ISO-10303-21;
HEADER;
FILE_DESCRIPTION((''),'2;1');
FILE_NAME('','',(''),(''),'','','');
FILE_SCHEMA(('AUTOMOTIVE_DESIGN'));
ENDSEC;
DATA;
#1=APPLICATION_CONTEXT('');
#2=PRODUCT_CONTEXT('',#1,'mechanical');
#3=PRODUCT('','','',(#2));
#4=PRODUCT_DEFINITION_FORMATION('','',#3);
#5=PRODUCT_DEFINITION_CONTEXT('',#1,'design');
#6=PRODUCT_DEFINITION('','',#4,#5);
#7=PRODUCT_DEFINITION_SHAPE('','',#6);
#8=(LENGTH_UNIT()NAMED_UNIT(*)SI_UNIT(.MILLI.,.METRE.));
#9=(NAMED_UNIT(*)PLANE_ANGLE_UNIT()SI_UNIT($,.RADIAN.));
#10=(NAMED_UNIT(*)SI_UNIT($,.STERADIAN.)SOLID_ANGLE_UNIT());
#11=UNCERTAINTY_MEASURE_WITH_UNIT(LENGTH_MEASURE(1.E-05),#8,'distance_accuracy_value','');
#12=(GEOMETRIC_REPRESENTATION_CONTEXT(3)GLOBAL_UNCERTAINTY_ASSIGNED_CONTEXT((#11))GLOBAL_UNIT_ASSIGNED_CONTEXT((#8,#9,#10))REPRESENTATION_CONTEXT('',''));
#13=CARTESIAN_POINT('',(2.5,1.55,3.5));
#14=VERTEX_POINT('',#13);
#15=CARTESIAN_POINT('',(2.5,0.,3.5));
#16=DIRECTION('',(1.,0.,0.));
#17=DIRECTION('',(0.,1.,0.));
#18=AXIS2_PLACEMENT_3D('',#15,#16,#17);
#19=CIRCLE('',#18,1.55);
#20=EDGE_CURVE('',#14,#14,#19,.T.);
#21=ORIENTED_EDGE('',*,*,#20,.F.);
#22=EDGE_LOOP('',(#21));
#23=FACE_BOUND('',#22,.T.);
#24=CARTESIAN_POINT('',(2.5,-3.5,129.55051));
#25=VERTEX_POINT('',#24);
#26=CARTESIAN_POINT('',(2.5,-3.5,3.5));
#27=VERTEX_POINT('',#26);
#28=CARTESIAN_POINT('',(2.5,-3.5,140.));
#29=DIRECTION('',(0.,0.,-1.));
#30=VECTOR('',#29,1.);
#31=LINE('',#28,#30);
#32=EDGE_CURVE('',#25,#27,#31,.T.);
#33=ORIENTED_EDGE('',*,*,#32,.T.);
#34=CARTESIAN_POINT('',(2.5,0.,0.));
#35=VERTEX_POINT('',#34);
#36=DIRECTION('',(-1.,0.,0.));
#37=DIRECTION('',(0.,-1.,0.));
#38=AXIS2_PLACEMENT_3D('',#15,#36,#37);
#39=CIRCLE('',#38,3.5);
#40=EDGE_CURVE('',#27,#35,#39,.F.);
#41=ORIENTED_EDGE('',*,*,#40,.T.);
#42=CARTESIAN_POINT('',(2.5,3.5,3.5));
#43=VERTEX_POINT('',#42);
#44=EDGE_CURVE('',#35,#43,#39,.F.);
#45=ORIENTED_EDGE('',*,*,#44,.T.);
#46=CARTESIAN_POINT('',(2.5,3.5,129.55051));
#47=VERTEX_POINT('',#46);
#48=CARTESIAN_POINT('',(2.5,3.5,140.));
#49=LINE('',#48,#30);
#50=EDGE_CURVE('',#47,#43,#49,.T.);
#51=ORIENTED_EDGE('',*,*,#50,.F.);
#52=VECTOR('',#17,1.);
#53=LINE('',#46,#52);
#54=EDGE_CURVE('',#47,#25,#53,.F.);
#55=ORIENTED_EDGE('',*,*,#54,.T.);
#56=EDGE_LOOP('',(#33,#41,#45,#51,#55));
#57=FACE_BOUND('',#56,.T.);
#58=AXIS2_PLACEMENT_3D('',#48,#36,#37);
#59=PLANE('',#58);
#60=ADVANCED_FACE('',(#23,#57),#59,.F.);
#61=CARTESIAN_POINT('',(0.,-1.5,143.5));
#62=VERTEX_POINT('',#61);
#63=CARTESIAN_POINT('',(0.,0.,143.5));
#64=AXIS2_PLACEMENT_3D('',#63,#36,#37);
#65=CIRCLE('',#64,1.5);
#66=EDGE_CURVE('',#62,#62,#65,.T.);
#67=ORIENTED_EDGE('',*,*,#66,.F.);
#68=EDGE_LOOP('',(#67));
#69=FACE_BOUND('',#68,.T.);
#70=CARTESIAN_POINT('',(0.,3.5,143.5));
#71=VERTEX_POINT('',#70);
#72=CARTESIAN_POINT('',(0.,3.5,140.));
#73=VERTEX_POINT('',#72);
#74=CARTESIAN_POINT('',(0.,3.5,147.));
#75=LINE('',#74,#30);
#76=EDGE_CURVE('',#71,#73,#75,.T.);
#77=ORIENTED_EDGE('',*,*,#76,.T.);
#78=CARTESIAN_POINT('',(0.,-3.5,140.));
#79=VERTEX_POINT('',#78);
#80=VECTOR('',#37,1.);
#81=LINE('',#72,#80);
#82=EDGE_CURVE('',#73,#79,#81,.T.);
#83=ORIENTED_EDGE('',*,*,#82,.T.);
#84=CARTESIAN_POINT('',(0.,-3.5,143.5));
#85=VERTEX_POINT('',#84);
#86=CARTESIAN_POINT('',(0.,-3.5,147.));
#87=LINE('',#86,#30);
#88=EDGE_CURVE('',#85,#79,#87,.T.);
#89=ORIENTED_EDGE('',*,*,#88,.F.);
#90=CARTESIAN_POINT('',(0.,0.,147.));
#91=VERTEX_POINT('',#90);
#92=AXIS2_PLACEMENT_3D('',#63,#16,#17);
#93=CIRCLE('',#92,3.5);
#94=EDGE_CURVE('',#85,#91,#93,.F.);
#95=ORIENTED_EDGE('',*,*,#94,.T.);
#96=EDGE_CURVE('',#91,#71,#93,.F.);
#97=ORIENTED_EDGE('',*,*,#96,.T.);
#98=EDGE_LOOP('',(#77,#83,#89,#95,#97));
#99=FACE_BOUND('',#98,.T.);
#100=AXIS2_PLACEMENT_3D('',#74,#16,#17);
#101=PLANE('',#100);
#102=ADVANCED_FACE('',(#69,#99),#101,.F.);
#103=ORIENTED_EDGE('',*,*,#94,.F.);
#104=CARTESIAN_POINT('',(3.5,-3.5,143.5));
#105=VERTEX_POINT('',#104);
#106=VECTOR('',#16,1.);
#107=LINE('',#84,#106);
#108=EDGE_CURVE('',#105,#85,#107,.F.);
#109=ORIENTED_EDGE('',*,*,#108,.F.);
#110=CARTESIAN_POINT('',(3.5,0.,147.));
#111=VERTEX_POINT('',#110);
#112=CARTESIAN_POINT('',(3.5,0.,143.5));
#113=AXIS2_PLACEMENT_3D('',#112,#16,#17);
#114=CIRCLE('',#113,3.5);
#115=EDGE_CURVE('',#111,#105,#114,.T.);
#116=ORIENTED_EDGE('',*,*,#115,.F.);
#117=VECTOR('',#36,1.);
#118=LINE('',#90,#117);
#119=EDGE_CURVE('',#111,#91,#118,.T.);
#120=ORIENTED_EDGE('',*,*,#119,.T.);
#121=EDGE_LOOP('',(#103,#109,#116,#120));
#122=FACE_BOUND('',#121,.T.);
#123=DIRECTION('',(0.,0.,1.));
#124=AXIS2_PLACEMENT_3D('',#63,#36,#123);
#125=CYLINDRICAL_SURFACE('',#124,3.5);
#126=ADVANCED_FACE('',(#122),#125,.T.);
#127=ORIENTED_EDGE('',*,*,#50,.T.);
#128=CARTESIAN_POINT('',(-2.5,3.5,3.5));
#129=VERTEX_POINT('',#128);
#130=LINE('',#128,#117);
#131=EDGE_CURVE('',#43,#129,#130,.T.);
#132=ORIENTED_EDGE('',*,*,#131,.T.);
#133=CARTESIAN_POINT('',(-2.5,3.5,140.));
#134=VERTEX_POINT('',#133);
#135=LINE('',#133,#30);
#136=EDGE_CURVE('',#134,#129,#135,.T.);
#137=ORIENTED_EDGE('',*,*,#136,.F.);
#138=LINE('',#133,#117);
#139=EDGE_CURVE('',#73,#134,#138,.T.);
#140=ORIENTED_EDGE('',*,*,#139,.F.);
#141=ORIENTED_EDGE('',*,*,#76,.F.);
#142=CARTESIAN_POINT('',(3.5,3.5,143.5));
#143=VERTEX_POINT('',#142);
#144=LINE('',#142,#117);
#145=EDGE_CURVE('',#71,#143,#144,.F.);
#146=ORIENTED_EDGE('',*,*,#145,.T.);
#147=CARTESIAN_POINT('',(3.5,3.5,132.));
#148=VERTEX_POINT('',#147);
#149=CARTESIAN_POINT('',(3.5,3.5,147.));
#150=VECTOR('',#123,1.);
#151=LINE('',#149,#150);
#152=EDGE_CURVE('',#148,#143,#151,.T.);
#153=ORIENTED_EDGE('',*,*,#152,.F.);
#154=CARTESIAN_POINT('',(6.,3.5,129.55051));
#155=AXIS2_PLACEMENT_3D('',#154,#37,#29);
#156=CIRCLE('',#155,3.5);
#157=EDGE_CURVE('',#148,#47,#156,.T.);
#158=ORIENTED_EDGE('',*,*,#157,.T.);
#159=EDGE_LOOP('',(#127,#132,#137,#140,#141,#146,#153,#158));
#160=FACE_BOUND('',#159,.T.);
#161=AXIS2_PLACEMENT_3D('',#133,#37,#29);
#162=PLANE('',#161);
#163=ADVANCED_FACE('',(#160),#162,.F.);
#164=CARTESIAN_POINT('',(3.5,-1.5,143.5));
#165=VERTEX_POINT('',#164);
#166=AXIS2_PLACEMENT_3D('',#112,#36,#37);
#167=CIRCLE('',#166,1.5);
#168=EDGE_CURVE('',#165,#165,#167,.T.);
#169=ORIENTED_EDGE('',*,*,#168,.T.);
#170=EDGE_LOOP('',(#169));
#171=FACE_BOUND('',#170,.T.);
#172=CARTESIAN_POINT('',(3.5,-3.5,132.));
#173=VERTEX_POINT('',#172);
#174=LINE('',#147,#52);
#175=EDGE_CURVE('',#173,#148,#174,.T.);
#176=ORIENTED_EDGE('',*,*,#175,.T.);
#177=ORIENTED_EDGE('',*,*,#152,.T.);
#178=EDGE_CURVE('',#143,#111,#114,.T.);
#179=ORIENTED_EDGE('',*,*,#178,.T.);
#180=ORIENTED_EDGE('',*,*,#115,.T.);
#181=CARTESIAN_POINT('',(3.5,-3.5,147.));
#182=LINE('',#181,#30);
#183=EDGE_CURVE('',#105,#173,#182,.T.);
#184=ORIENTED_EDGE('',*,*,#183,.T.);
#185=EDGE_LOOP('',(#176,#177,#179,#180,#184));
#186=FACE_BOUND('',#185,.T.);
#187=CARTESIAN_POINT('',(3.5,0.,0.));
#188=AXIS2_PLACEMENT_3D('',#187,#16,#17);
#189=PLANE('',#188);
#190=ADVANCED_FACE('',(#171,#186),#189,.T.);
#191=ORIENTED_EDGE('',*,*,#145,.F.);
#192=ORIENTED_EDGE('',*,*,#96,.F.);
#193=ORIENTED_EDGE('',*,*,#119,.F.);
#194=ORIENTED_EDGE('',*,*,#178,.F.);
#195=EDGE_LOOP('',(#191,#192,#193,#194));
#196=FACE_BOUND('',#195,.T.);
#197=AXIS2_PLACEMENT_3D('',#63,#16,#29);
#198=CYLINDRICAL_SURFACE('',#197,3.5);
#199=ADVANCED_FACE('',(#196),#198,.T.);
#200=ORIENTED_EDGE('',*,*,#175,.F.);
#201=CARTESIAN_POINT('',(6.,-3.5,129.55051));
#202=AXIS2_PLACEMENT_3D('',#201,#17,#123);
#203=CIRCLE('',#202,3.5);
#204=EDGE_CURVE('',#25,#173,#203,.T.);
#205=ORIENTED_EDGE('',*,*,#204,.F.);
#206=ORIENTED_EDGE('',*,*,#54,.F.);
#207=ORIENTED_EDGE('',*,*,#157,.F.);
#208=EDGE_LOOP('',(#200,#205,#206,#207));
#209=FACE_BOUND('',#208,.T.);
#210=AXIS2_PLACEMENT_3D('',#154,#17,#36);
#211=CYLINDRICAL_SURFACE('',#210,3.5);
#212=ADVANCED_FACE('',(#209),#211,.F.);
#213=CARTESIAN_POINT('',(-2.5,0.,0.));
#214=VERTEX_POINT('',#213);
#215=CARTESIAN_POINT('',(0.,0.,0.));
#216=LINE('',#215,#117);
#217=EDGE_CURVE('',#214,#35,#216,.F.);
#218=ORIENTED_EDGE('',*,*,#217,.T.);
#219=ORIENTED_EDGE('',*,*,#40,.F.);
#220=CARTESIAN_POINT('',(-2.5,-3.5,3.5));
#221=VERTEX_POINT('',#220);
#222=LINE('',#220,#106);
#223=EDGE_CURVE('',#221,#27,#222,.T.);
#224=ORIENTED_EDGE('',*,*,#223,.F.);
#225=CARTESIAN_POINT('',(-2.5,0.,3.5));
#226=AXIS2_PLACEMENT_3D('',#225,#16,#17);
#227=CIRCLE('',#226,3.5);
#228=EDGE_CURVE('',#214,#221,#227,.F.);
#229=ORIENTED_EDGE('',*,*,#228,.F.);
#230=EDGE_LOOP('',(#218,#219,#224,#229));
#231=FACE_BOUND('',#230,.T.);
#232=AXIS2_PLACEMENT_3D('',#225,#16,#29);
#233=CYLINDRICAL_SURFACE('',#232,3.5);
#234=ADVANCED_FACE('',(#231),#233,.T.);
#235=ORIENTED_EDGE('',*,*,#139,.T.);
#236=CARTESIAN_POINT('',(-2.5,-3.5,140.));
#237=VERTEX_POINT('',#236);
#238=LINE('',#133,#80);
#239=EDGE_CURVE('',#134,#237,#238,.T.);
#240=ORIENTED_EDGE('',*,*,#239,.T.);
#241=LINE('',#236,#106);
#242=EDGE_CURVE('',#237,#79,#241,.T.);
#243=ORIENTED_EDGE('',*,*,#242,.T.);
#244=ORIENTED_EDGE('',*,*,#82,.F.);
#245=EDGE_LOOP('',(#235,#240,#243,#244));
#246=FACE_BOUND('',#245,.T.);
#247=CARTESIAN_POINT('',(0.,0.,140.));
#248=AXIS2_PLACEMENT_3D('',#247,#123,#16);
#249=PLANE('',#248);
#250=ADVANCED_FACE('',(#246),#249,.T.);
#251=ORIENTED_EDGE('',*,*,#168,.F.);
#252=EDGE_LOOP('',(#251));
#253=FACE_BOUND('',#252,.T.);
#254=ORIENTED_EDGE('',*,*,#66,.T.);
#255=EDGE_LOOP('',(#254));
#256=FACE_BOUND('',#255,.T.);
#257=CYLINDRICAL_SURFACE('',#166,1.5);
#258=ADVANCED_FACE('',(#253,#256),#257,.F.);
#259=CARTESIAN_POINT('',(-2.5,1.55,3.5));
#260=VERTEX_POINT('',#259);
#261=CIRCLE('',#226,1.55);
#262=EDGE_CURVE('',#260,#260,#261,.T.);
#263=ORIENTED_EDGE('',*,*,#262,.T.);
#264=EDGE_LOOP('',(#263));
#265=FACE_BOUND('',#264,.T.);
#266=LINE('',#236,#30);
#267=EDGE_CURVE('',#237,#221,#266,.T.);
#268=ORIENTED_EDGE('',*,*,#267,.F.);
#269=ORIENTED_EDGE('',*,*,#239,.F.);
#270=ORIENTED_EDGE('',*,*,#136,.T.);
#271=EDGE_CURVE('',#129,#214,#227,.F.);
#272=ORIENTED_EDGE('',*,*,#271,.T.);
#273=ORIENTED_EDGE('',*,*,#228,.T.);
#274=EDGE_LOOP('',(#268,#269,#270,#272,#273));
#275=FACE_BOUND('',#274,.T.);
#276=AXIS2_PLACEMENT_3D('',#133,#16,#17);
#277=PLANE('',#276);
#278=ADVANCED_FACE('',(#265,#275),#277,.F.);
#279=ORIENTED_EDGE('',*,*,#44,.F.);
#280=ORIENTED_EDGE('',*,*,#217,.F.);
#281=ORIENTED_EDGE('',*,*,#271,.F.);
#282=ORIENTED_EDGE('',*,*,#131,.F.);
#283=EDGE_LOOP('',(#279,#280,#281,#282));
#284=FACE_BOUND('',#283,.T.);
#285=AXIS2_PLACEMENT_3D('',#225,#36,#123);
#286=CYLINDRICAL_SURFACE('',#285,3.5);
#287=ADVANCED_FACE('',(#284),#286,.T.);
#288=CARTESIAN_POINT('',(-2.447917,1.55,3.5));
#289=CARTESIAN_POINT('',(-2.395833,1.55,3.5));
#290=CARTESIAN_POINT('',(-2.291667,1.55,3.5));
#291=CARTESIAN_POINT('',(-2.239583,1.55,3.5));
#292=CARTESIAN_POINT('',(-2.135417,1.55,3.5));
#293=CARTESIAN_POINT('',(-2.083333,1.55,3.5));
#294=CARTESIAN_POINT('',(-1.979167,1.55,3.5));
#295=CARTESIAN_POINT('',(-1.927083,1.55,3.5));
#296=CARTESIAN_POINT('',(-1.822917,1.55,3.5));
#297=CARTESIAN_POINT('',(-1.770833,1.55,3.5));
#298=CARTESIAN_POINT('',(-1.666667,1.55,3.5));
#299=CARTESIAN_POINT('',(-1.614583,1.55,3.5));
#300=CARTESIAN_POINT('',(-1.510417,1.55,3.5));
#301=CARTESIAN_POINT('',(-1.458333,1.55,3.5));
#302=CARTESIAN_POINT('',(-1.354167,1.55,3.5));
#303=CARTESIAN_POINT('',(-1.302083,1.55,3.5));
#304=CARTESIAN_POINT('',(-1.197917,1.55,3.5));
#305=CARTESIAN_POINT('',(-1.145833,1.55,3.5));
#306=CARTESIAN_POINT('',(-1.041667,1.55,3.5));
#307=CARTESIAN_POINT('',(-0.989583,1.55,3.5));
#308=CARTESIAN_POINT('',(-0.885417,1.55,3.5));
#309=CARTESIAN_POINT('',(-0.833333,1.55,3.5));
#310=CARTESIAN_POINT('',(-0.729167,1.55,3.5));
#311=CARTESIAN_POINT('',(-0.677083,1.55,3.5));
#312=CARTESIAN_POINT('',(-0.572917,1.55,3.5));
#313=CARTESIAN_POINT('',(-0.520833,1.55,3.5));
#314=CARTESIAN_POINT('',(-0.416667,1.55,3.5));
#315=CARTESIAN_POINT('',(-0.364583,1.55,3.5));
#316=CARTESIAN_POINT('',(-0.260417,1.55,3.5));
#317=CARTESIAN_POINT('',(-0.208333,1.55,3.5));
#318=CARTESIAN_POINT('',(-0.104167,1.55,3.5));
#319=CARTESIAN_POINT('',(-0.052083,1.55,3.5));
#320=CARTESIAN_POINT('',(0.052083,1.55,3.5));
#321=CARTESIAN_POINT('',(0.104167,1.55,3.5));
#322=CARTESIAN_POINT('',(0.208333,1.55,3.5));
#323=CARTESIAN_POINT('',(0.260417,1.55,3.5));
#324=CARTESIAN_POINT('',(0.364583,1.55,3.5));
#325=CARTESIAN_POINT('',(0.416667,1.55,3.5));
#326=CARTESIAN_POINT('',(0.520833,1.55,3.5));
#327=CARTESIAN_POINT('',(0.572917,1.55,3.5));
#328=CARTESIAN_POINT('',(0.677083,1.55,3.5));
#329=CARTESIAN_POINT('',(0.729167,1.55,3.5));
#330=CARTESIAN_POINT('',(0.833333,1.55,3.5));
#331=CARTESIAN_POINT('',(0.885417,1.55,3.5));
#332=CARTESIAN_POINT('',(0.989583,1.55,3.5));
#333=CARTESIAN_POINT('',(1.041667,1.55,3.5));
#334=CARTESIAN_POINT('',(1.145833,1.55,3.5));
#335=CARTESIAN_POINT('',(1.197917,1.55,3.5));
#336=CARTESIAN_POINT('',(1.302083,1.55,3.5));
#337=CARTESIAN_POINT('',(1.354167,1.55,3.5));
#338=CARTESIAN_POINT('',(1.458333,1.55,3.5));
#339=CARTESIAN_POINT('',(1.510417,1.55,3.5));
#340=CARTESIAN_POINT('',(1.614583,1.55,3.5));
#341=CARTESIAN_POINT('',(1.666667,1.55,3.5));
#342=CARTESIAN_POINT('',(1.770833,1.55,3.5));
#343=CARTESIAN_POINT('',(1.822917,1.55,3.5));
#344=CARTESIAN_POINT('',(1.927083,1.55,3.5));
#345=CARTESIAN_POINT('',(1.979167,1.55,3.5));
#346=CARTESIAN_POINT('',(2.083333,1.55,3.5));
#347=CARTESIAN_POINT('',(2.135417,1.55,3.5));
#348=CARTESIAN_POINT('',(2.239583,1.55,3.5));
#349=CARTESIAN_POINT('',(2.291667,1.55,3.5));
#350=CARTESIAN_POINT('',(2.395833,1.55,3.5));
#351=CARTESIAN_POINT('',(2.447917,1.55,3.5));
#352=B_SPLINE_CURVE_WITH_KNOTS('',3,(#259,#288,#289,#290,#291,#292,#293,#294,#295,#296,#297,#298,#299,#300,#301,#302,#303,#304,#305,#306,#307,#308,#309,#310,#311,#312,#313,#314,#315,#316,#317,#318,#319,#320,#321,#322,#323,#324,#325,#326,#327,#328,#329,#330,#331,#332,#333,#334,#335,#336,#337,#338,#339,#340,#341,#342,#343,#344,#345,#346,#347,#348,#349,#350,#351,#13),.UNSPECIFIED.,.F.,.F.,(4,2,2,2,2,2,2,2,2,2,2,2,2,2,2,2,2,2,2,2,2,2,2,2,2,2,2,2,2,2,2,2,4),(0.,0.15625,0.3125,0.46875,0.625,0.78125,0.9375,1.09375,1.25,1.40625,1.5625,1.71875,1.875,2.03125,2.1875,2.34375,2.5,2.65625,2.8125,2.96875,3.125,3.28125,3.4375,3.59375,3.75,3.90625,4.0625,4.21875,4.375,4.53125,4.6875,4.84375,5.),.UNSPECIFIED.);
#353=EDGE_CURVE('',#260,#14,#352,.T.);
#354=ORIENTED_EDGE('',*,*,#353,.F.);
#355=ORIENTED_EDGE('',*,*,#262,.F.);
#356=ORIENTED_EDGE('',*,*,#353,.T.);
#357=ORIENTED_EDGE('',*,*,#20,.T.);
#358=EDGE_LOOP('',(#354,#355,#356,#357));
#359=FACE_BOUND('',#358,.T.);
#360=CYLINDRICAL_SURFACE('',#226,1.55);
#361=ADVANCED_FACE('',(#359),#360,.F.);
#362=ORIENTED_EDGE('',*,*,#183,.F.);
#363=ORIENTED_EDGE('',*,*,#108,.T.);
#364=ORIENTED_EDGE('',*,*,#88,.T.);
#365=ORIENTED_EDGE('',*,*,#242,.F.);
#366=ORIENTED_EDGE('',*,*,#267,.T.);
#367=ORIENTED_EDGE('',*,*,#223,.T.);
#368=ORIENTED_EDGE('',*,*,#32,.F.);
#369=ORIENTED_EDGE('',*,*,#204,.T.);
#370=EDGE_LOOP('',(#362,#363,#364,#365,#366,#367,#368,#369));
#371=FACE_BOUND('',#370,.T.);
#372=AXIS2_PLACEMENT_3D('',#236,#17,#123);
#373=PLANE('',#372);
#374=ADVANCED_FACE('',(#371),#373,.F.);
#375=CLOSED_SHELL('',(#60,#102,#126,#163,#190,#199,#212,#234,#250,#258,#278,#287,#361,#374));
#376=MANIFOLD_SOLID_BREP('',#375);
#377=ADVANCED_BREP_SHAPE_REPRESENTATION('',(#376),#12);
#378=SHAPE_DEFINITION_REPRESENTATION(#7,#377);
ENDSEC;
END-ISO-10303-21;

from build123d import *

# Parameters (mm, degrees)
SKETCH_1_W          = 5
SKETCH_1_H          = 7
EXTRUDE_2_DEPTH     = 140
FILLET_1_R          = 3.5
SKETCH_3_R          = 1.55
CUT_EXTRUDE_1_DEPTH = 141.132972565
SKETCH_4_W          = 2.5
SKETCH_4_H          = 7
EXTRUDE_3_DEPTH     = 7
SKETCH_5_W          = 15
SKETCH_5_H          = 7
EXTRUDE_4_DEPTH     = 1
FILLET_2_R          = 3.5
SKETCH_6_R          = 1.5
CUT_EXTRUDE_2_DEPTH = 148.083309726
FILLET_3_R          = 3.5


# Some blends are built 0.0001 mm under size
with BuildPart() as part:
    # 草图1 → 凸台-拉伸2 (new body)
    with BuildSketch(Plane.XY):
        Rectangle(SKETCH_1_W, SKETCH_1_H)
    extrude(amount=EXTRUDE_2_DEPTH)

    # 圆角1
    fillet_1_edges = [part.edges().sort_by_distance(p)[0] for p in [
        (0, -3.5, 0),
        (0, 3.5, 0),
    ]]
    fillet(fillet_1_edges, radius=FILLET_1_R - 0.0001)  # a hair under: the kernel refuses the full size

    # 草图3 → 切除-拉伸1 (cut, through all)
    with BuildSketch(Plane(origin=(2.5, 0, 0), x_dir=(0, 0, -1), z_dir=(1, 0, 0))):
        with Locations(Location((-3.5, 0, 0), (0, 0, 90))):
            Circle(SKETCH_3_R)
    extrude(amount=-CUT_EXTRUDE_1_DEPTH, mode=Mode.SUBTRACT)

    # 草图4 → 凸台-拉伸3 (add)
    with BuildSketch(Plane.XY.offset(140)):
        with Locations((1.25, 0)):
            Rectangle(SKETCH_4_W, SKETCH_4_H)
    extrude(amount=EXTRUDE_3_DEPTH)

    # 草图5 → 凸台-拉伸4 (add)
    with BuildSketch(Plane(origin=(2.5, 0, 0), x_dir=(0, 0, -1), z_dir=(1, 0, 0))):
        with Locations((-139.5, 0)):
            Rectangle(SKETCH_5_W, SKETCH_5_H)
    extrude(amount=EXTRUDE_4_DEPTH)

    # 圆角2
    fillet_2_edges = [part.edges().sort_by_distance(p)[0] for p in [
        (1.75, -3.5, 147),
        (1.75, 3.5, 147),
    ]]
    fillet(fillet_2_edges, radius=FILLET_2_R - 0.0001)  # a hair under: the kernel refuses the full size

    # 草图6 → 切除-拉伸2 (cut, through all)
    with BuildSketch(Plane.ZY):
        with Locations(Location((143.5, 0, 0), (0, 0, 270))):
            Circle(SKETCH_6_R)
    extrude(amount=-CUT_EXTRUDE_2_DEPTH, mode=Mode.SUBTRACT)

    # 圆角3
    # the kernel refuses this fillet: 3.5 mm, written as the material it adds along each edge
    with BuildSketch(Plane(origin=(2.5, 3.5, 132), x_dir=(1, 0, 0), z_dir=(0, -1, 0))) as fillet_3_piece_1:
        with BuildLine():
            CenterArc((3.5, -2.449489743), FILLET_3_R, 135.584691403, 44.415308597)
            Line((0, -2.449489743), (-0.07, -2.449489743))
            Line((-0.07, -2.449489743), (-0.07, 0))
            Line((-0.07, 0), (0, 0.07))
            ThreePointArc((0, 0.07), (0.5, 0.07), (0.95, 0.048989795))
            Line((0.95, 0.048989795), (1, 0))
        make_face()
    extrude(amount=7)


solid = part.part
